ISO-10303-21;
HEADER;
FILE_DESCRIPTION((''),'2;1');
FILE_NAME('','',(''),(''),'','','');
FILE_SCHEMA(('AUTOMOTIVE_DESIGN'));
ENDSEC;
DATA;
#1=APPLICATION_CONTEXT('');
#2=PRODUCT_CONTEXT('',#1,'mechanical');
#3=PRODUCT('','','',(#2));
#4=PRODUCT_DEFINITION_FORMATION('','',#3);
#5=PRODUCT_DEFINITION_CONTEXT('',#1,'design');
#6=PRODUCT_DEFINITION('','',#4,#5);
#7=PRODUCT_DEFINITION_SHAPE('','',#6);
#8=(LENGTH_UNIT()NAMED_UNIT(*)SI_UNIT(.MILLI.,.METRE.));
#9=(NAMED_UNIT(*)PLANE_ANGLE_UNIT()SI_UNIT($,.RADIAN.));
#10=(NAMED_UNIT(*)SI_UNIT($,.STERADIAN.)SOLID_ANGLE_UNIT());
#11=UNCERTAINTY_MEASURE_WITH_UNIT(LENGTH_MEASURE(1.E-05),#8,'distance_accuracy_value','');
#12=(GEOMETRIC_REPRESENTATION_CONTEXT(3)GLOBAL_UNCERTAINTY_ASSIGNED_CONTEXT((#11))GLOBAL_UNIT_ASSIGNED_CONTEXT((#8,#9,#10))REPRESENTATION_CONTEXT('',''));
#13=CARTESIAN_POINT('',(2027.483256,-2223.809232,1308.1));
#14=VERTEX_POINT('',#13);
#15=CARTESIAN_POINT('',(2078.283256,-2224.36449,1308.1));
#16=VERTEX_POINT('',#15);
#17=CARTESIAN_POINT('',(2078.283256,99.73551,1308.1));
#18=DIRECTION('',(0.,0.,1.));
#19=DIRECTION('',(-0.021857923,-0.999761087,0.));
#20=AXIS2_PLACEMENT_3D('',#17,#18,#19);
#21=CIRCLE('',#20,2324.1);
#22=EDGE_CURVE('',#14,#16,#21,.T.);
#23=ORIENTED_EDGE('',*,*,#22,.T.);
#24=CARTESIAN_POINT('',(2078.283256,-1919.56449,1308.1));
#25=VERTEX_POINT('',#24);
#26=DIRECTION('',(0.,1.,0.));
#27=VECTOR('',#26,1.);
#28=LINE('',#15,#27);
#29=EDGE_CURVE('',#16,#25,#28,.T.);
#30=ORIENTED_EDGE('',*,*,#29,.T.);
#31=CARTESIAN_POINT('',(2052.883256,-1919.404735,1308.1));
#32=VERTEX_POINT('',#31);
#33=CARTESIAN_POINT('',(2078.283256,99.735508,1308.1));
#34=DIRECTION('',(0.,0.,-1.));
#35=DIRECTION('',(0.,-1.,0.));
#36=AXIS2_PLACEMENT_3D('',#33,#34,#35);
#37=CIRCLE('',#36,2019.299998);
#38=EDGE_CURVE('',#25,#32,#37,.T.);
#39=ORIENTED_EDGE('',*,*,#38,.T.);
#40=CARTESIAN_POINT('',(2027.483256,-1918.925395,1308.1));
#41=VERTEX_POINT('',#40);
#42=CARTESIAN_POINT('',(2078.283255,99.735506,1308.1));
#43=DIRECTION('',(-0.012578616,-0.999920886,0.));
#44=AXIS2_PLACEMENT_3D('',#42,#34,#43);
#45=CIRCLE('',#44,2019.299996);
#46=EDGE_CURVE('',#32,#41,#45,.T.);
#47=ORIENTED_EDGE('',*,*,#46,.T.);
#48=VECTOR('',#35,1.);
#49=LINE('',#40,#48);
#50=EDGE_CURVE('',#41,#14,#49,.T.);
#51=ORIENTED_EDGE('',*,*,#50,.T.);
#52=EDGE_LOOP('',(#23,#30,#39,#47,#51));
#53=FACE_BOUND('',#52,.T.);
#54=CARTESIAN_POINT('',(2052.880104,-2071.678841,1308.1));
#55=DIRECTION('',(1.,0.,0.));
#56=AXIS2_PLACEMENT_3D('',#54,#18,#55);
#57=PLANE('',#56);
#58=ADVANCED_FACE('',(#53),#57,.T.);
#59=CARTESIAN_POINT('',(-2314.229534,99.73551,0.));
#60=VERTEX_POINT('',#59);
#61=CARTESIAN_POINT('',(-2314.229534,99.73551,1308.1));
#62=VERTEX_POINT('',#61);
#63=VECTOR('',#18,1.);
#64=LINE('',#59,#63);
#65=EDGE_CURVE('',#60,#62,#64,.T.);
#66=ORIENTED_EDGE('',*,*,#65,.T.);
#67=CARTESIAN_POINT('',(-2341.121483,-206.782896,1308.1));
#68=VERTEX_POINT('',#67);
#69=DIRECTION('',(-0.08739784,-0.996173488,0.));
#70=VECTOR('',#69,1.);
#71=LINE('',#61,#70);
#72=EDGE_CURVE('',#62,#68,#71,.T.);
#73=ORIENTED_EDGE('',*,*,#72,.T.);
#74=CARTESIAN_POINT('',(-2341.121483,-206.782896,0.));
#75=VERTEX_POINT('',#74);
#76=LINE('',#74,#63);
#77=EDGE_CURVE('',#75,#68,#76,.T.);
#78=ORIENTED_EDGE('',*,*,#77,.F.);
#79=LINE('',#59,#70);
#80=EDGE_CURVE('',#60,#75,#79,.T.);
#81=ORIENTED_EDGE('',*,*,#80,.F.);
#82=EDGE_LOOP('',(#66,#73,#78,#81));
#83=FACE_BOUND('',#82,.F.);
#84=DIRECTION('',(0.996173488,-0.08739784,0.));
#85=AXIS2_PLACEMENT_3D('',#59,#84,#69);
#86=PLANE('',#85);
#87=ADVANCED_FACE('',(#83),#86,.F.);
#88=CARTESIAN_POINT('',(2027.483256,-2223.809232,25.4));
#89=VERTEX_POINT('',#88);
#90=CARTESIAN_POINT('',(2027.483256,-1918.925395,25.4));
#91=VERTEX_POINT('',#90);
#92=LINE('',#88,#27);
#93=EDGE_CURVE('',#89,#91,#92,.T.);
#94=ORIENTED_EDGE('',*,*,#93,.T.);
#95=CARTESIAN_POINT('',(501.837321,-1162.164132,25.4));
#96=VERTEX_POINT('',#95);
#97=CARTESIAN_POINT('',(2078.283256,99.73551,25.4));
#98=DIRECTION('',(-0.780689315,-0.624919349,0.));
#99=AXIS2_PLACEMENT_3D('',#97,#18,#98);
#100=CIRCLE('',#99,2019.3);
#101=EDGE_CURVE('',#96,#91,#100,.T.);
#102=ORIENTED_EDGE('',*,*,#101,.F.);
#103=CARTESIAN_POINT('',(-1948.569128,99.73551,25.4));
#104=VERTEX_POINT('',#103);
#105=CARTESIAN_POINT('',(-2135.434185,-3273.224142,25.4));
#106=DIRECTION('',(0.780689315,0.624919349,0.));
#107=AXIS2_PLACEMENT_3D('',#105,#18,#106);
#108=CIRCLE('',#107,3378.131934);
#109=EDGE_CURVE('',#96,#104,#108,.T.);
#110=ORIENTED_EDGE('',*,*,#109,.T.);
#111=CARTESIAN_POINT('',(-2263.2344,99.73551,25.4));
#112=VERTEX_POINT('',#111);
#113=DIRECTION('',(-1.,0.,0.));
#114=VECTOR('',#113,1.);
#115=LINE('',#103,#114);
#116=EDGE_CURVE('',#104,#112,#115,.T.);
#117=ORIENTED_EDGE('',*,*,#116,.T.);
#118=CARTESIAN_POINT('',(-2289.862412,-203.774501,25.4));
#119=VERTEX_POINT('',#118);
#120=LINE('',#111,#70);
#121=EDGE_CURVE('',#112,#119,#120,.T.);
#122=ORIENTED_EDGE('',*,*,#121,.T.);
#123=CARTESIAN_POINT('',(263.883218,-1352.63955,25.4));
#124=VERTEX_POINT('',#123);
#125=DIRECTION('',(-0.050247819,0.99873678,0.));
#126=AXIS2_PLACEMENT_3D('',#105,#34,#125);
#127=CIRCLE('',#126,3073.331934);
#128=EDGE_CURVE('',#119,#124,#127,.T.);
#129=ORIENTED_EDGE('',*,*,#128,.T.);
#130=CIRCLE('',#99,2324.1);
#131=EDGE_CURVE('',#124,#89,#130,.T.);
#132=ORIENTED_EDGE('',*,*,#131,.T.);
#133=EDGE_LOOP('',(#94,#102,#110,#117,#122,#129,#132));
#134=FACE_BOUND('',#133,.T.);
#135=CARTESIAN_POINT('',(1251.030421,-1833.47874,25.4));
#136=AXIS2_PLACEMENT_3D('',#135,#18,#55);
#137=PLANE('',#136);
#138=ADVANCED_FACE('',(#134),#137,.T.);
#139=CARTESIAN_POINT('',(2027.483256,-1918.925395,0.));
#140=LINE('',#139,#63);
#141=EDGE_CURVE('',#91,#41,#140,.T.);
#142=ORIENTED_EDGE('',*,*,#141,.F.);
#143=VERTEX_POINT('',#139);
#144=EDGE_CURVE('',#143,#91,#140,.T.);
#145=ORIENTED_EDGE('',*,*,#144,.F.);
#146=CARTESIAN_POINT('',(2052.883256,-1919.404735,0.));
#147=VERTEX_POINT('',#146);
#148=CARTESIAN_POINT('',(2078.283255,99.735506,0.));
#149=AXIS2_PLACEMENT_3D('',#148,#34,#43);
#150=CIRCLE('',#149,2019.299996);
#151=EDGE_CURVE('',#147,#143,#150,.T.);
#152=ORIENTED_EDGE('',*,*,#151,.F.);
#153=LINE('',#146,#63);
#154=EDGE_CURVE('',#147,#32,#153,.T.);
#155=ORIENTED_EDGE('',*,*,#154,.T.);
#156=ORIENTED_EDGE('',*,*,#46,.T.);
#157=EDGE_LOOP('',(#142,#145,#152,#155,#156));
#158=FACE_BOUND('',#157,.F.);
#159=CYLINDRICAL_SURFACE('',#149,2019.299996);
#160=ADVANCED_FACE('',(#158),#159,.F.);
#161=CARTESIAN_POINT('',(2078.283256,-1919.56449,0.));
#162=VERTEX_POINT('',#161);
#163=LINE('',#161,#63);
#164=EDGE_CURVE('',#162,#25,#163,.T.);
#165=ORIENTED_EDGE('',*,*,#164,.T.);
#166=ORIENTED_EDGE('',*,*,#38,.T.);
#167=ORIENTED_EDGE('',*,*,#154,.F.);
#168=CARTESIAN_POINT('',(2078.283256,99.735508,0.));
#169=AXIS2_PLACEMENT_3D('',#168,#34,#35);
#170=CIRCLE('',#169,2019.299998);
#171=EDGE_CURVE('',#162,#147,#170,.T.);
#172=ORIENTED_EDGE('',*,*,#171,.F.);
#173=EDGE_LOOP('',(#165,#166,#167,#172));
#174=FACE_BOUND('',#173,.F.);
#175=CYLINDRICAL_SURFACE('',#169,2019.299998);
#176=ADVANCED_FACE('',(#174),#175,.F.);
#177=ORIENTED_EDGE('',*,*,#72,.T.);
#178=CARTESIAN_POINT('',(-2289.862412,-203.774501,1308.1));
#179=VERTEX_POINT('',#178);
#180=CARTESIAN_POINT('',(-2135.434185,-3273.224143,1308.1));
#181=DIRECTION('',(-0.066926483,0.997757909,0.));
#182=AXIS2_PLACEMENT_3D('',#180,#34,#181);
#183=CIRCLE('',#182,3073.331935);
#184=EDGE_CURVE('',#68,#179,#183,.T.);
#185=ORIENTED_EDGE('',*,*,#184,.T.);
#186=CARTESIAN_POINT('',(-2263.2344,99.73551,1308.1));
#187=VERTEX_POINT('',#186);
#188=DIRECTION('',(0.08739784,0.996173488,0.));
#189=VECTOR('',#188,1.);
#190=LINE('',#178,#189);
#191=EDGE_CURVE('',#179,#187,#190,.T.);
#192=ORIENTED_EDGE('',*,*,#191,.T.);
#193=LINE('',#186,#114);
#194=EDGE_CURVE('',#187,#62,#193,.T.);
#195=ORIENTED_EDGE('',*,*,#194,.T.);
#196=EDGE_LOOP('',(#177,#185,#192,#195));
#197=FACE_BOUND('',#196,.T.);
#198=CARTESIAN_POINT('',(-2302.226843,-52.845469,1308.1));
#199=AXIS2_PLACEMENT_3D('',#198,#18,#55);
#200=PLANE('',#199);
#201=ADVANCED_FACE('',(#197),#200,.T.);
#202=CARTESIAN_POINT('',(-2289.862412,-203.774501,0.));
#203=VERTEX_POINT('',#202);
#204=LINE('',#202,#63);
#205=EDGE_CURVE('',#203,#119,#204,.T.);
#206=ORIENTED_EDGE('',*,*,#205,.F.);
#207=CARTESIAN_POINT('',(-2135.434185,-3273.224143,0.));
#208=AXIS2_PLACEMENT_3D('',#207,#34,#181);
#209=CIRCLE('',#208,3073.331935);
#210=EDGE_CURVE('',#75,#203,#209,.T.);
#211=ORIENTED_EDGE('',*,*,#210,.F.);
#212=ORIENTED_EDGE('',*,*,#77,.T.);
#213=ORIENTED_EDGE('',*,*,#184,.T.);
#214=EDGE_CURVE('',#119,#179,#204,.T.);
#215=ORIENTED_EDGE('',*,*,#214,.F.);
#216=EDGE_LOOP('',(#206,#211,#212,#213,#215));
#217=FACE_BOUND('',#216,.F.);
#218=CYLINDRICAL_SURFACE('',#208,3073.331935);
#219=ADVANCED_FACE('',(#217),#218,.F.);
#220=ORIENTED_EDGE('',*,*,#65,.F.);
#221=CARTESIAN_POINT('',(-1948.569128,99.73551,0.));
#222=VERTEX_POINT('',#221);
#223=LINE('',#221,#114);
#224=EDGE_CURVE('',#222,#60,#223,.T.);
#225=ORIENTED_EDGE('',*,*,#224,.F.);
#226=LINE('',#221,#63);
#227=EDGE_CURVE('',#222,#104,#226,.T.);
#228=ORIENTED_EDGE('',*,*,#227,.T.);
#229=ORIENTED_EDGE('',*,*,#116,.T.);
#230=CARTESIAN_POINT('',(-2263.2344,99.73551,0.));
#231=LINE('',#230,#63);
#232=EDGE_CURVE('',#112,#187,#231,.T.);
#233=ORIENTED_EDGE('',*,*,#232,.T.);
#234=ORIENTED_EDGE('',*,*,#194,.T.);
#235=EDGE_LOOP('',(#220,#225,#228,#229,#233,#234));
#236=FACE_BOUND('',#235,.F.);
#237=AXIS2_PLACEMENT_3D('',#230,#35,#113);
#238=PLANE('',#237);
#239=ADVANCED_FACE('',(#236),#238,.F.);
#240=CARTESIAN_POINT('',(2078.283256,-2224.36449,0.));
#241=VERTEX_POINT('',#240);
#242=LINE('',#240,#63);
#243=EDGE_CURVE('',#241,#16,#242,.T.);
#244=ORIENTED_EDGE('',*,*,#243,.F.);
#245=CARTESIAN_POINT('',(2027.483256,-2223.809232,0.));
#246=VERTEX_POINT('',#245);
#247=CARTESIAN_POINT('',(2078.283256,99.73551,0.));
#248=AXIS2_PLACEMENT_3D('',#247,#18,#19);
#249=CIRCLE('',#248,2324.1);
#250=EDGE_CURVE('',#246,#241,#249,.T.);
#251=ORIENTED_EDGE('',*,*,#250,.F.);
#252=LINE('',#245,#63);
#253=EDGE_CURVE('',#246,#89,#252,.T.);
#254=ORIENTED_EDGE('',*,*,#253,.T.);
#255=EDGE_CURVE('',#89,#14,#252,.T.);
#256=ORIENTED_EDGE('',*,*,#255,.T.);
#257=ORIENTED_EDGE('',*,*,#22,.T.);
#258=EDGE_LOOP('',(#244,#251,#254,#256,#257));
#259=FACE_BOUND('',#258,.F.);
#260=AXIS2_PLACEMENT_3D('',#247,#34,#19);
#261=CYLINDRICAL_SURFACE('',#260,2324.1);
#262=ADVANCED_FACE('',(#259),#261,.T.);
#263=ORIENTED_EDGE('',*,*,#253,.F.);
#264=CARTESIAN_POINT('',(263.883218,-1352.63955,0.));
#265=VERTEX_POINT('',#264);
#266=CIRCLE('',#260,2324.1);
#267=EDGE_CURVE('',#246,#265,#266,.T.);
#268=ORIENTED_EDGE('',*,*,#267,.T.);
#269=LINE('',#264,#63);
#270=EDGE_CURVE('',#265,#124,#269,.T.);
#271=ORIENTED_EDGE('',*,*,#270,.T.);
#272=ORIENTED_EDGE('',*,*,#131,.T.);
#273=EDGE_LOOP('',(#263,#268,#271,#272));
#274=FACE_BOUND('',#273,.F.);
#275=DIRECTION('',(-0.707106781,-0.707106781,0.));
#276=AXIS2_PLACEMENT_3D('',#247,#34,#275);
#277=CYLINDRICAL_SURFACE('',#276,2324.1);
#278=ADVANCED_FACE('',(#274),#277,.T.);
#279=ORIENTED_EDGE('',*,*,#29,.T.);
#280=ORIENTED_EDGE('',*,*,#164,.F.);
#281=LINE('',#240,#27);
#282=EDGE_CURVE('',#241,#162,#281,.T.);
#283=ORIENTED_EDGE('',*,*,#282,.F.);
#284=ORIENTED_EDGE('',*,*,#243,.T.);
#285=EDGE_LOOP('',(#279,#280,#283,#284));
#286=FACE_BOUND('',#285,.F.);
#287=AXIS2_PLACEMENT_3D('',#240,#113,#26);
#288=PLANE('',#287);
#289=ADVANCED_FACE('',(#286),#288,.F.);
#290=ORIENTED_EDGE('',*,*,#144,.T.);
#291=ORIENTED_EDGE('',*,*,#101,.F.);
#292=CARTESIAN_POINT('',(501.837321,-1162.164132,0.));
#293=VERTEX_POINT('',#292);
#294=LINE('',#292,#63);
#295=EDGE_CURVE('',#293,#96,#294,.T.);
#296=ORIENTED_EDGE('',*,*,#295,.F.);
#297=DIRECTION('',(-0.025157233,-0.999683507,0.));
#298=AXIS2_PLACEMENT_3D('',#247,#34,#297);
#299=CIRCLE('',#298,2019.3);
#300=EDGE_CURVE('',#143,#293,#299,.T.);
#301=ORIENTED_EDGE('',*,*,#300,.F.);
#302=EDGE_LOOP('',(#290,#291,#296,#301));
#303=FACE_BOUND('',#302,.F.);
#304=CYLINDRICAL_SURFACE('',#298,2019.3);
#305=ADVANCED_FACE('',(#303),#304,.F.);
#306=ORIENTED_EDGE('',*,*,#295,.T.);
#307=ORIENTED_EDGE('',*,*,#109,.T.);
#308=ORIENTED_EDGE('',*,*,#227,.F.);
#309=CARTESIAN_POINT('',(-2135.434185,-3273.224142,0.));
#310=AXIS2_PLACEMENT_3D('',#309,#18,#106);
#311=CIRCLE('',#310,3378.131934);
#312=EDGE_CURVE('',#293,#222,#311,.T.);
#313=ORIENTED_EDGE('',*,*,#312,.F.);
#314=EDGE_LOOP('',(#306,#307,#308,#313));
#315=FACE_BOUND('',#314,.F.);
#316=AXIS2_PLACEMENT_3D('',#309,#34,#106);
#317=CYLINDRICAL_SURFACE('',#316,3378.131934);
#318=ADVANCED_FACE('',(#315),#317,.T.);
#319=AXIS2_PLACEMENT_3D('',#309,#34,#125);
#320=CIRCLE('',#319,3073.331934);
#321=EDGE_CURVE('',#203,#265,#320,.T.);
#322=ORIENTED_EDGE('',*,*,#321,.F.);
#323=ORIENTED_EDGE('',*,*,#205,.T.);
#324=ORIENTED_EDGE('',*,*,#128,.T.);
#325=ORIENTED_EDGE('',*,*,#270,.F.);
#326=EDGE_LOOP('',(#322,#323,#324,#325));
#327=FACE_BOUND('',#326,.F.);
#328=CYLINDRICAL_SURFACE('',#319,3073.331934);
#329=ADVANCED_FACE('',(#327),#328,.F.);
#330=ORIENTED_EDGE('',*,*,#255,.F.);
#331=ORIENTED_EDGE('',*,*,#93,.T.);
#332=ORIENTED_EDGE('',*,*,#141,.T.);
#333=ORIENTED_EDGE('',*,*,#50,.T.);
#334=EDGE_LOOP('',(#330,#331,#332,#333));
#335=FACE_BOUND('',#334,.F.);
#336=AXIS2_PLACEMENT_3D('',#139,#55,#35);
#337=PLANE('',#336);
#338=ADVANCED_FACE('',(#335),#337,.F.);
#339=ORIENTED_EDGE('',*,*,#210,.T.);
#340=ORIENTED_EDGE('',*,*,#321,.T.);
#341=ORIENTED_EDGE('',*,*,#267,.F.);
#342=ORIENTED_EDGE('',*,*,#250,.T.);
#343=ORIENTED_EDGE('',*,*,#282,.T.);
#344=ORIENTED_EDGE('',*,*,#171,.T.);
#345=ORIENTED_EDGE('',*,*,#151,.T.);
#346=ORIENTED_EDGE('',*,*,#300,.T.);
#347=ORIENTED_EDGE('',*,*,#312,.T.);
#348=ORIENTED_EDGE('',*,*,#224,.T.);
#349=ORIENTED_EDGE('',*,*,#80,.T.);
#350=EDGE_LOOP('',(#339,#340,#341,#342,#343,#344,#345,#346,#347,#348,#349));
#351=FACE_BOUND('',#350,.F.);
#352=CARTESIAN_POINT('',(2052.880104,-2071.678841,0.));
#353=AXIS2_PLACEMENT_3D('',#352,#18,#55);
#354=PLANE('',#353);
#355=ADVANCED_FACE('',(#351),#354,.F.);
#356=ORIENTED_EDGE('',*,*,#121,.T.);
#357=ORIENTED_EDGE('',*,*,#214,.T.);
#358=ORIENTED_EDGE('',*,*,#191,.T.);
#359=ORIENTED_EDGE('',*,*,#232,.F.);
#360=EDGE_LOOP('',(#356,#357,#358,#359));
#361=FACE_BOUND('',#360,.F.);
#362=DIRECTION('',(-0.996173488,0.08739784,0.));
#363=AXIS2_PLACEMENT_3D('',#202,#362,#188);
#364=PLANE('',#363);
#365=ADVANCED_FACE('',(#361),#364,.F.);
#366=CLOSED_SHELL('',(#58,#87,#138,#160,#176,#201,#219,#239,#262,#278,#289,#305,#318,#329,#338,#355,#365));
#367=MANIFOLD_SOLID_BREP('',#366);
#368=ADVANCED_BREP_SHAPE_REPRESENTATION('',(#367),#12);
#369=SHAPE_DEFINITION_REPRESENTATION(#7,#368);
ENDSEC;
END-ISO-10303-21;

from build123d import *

# Parameters (mm, degrees)
F1_DEPTH = 25.4
F2_DEPTH = 1308.1
F3_DEPTH = 25.4
F4_DEPTH = 1308.1


with BuildPart() as f1:
    # F0 (on Top) → F1 (new body)
    with BuildSketch(Plane.XY):
        with BuildLine():
            Line((-1948.5691277788, 99.7355101007), (-2263.234400171, 99.7355101007))
            Line((-2263.234400171, 99.7355101007), (-2289.862411819, -203.7745007557))
            ThreePointArc((-2289.862411819, -203.7745007557), (-874.5398284023, -470.4550472357), (263.8832180742, -1352.6395496224))
            ThreePointArc((263.8832180742, -1352.6395496224), (346.7538874408, -1450.5053929427), (434.8963853674, -1543.651360055))
            Line((434.8963853674, -1543.651360055), (650.422532273, -1328.1252131493))
            ThreePointArc((650.422532273, -1328.1252131493), (573.8397062056, -1247.1951105763), (501.8373213462, -1162.1641319538))
            ThreePointArc((501.8373213462, -1162.1641319538), (-588.8138343544, -269.9358016898), (-1948.5691277788, 99.7355101007))
        make_face()
    extrude(amount=F1_DEPTH)

    # F0 (on Top) → F2 (join)
    with BuildSketch(Plane.XY):
        with BuildLine():
            Line((-2263.234400171, 99.7355101007), (-2314.2295336755, 99.7355101007))
            Line((-2314.2295336755, 99.7355101007), (-2341.1214825581, -206.7828963515))
            ThreePointArc((-2341.1214825581, -206.7828963515), (-2315.4982300933, -205.1716461899), (-2289.862411819, -203.7745007557))
            Line((-2289.862411819, -203.7745007557), (-2263.234400171, 99.7355101007))
        make_face()
    extrude(amount=F2_DEPTH)

    # F0 (on Top) → F3 (join)
    with BuildSketch(Plane.XY):
        with BuildLine():
            ThreePointArc((2027.483255523, -1918.925395054), (1282.1233486229, -1755.9858840328), (650.422532273, -1328.1252131493))
            Line((650.422532273, -1328.1252131493), (434.8963853674, -1543.651360055))
            ThreePointArc((434.8963853674, -1543.651360055), (1165.4738720531, -2037.6039199968), (2027.483255523, -2223.8092323134))
            Line((2027.483255523, -2223.8092323134), (2027.483255523, -1918.925395054))
        make_face()
    extrude(amount=F3_DEPTH)

    # F0 (on Top) → F4 (join)
    with BuildSketch(Plane.XY):
        with BuildLine():
            ThreePointArc((2052.883255523, -1919.4047351522), (2040.182501702, -1919.2050097162), (2027.483255523, -1918.925395054))
            Line((2027.483255523, -1918.925395054), (2027.483255523, -2223.8092323134))
            ThreePointArc((2027.483255523, -2223.8092323134), (2052.8817382899, -2224.225671357), (2078.283255523, -2224.3644898993))
            Line((2078.283255523, -2224.3644898993), (2078.283255523, -1919.5644898993))
            ThreePointArc((2078.283255523, -1919.5644898993), (2065.5830043289, -1919.5245508176), (2052.883255523, -1919.4047351522))
        make_face()
    extrude(amount=F4_DEPTH)


solid = f1.part
